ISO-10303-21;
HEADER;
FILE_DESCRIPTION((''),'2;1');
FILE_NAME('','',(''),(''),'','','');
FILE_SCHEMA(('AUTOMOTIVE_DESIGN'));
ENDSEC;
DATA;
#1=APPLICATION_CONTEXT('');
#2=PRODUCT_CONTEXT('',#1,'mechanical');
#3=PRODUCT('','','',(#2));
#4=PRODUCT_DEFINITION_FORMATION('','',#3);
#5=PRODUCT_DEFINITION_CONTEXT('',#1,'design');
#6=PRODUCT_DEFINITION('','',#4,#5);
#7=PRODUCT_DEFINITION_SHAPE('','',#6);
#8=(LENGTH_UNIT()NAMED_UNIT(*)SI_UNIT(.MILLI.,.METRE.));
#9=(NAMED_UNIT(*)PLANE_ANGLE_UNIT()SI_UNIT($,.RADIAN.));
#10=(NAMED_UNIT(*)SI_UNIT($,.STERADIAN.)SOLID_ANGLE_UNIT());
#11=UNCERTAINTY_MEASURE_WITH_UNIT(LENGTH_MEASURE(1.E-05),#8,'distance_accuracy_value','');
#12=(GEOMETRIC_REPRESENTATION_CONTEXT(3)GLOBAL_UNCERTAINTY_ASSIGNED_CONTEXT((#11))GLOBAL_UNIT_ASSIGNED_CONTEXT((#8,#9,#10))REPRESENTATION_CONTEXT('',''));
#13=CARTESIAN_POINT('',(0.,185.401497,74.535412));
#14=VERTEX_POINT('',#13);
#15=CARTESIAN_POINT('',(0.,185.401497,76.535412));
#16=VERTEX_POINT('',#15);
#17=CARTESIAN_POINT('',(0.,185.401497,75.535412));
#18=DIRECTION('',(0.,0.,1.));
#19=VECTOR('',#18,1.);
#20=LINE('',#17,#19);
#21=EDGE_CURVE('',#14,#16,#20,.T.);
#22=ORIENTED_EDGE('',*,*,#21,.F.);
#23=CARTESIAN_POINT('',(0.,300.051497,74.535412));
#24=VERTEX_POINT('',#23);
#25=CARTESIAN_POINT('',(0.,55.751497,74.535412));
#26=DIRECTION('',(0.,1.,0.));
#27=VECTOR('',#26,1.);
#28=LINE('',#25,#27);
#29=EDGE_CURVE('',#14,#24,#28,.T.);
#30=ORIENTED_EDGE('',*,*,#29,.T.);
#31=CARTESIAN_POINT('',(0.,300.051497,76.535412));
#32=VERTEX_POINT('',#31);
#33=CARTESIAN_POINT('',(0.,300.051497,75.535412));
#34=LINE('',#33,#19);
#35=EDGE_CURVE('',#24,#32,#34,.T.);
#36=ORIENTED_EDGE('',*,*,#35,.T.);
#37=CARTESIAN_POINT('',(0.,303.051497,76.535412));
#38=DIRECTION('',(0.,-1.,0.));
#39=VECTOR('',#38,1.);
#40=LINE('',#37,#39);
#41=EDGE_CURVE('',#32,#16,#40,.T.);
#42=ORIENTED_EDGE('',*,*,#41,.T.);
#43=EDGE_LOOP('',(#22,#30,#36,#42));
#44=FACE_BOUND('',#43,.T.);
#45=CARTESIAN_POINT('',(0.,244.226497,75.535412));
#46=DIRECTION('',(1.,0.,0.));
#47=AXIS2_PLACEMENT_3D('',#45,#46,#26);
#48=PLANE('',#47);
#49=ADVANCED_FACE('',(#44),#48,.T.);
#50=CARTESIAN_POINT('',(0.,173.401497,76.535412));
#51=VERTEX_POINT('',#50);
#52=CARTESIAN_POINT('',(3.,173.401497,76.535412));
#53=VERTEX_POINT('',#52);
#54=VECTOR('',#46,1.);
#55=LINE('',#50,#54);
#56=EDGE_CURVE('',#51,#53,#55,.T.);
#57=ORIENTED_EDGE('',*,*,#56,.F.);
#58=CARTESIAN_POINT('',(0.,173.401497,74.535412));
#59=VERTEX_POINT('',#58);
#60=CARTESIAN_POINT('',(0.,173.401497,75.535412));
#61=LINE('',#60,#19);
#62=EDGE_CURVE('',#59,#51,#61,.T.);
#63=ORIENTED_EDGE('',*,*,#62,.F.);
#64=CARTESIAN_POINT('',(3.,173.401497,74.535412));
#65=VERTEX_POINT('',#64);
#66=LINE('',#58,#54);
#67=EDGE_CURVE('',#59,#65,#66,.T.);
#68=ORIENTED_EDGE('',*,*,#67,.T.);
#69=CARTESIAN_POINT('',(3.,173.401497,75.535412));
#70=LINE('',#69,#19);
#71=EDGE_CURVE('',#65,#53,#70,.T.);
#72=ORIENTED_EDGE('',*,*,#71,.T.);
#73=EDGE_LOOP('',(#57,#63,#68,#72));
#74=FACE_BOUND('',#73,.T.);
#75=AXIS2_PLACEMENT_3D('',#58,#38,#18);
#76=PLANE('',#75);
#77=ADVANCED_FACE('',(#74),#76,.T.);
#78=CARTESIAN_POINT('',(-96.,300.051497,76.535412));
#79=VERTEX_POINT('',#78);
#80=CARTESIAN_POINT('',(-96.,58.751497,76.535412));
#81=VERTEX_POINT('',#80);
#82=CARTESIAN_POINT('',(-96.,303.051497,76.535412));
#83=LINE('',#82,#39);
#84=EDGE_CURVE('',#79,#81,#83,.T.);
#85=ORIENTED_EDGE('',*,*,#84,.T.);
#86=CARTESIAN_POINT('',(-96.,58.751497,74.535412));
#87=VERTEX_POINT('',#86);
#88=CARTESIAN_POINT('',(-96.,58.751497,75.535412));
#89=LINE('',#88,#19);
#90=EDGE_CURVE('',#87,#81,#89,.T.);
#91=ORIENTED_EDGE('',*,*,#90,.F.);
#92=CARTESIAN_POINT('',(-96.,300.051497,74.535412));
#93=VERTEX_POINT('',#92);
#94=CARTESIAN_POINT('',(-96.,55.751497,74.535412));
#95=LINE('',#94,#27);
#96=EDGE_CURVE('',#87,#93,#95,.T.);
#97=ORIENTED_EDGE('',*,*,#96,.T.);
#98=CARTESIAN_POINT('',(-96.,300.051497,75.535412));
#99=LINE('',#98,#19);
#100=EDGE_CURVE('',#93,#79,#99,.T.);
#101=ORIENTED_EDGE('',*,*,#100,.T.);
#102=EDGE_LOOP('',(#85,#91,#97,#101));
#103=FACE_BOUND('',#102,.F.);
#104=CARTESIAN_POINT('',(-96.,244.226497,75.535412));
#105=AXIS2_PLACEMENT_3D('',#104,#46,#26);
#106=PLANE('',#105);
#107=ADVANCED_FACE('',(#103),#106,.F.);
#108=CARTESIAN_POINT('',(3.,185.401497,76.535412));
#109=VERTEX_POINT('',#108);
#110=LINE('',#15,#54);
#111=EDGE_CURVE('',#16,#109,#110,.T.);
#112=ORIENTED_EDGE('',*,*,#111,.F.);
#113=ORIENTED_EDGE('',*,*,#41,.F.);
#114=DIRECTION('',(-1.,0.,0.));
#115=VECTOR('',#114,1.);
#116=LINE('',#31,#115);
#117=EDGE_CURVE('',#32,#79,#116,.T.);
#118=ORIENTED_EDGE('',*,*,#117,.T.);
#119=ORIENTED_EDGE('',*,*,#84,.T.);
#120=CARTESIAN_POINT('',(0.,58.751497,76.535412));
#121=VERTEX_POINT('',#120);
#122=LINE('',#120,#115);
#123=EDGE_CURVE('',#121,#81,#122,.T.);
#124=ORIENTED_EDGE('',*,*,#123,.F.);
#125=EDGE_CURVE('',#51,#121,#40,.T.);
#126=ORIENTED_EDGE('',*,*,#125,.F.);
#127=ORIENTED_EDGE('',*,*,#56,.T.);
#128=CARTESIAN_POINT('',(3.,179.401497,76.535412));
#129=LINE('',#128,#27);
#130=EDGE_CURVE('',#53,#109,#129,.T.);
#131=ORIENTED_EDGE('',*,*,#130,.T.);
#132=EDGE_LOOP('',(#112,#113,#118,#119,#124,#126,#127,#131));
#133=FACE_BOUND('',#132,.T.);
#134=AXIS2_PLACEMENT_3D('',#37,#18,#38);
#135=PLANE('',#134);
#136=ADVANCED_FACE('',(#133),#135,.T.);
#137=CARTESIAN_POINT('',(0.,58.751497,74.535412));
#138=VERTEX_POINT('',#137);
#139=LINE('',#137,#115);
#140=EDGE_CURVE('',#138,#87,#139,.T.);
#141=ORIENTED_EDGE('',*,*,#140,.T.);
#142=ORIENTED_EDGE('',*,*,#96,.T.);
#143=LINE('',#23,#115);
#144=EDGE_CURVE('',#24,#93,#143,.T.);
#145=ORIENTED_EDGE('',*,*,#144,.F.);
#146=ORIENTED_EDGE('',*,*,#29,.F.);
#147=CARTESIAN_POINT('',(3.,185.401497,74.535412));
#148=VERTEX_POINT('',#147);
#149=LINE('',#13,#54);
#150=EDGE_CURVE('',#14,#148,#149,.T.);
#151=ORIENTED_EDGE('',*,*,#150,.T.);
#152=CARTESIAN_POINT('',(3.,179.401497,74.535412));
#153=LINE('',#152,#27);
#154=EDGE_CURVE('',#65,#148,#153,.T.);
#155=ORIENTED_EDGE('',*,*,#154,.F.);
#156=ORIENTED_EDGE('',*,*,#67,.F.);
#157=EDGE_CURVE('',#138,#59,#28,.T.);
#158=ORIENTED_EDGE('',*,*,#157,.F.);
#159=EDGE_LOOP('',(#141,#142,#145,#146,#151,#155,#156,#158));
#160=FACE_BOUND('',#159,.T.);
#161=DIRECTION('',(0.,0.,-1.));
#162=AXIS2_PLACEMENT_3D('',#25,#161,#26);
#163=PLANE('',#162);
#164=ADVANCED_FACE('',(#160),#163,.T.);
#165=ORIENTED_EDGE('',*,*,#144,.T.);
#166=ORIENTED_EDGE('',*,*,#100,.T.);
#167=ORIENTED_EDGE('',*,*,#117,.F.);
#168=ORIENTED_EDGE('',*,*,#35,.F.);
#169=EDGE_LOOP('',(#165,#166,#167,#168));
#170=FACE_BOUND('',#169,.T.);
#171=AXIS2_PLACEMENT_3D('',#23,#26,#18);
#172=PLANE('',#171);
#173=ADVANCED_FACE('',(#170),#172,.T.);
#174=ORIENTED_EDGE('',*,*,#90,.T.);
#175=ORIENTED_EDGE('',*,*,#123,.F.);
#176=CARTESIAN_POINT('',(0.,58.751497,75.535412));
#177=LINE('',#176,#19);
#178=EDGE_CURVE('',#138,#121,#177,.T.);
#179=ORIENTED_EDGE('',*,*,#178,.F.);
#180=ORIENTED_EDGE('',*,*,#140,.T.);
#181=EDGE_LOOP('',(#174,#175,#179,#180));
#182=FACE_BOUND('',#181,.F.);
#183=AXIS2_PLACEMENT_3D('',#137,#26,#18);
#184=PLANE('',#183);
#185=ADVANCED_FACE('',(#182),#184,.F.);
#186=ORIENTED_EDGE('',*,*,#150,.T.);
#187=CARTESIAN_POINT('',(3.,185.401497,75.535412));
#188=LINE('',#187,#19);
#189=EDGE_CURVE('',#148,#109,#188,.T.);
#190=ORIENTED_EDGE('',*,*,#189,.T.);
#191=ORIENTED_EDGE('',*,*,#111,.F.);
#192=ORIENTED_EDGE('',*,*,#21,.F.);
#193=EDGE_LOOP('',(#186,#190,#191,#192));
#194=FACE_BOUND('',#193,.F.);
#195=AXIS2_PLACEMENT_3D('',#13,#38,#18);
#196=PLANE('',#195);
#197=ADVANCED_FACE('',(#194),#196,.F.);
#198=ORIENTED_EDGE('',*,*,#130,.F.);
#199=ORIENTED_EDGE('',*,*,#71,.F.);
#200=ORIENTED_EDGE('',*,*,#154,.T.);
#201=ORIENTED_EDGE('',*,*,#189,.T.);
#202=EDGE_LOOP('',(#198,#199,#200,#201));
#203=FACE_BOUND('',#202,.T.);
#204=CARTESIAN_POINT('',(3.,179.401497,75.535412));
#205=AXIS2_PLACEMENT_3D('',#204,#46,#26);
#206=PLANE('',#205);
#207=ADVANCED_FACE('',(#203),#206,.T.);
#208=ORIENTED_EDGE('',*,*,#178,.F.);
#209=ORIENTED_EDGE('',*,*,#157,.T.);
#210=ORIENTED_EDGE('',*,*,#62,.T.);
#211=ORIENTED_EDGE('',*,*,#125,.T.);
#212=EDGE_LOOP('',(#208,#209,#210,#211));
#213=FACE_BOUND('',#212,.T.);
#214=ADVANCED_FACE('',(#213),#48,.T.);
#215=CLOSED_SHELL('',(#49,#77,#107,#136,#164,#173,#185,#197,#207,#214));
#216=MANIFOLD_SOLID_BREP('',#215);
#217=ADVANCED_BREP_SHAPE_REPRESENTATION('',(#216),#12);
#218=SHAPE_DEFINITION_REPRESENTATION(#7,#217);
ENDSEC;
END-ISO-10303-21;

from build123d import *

# Parameters (mm, degrees)
F0_W     = 117.65
F0_H     = 2
F0_W_2   = 12
F1_DEPTH = 96
F2_DEPTH = 3
F3_DEPTH = 2
F4_DEPTH = 2
F5_DEPTH = 1
F6_DEPTH = 1


with BuildPart() as f1:
    # F0 (on Right) → F1 (new body)
    with BuildSketch(Plane.YZ):
        with Locations((244.2264966011, 75.535411799)):
            Rectangle(F0_W, F0_H)
        with Locations((179.4014966011, 75.535411799)):
            Rectangle(F0_W_2, F0_H)
        with Locations((114.5764966011, 75.535411799)):
            Rectangle(F0_W, F0_H)
    extrude(amount=-F1_DEPTH)

    # F0 (on Right) → F2 (join)
    with BuildSketch(Plane.YZ):
        with Locations((179.4014966011, 75.535411799)):
            Rectangle(F0_W_2, F0_H)
    extrude(amount=F2_DEPTH)

    # F3 (cut): a face of the model
    f3_faces = [f1.faces().sort_by_distance(p)[0] for p in [
        (-48, 55.7514966011, 75.535411799),
    ]]
    extrude(f3_faces, amount=-F3_DEPTH, mode=Mode.SUBTRACT)

    # F4 (cut): a face of the model
    f4_faces = [f1.faces().sort_by_distance(p)[0] for p in [
        (-48, 303.0514966011, 75.535411799),
    ]]
    extrude(f4_faces, amount=-F4_DEPTH, mode=Mode.SUBTRACT)

    # F5 (cut): a face of the model
    f5_faces = [f1.faces().sort_by_distance(p)[0] for p in [
        (-48, 57.7514966011, 75.535411799),
    ]]
    extrude(f5_faces, amount=-F5_DEPTH, mode=Mode.SUBTRACT)

    # F6 (cut): a face of the model
    f6_faces = [f1.faces().sort_by_distance(p)[0] for p in [
        (-48, 301.0514966011, 75.535411799),
    ]]
    extrude(f6_faces, amount=-F6_DEPTH, mode=Mode.SUBTRACT)


solid = f1.part
